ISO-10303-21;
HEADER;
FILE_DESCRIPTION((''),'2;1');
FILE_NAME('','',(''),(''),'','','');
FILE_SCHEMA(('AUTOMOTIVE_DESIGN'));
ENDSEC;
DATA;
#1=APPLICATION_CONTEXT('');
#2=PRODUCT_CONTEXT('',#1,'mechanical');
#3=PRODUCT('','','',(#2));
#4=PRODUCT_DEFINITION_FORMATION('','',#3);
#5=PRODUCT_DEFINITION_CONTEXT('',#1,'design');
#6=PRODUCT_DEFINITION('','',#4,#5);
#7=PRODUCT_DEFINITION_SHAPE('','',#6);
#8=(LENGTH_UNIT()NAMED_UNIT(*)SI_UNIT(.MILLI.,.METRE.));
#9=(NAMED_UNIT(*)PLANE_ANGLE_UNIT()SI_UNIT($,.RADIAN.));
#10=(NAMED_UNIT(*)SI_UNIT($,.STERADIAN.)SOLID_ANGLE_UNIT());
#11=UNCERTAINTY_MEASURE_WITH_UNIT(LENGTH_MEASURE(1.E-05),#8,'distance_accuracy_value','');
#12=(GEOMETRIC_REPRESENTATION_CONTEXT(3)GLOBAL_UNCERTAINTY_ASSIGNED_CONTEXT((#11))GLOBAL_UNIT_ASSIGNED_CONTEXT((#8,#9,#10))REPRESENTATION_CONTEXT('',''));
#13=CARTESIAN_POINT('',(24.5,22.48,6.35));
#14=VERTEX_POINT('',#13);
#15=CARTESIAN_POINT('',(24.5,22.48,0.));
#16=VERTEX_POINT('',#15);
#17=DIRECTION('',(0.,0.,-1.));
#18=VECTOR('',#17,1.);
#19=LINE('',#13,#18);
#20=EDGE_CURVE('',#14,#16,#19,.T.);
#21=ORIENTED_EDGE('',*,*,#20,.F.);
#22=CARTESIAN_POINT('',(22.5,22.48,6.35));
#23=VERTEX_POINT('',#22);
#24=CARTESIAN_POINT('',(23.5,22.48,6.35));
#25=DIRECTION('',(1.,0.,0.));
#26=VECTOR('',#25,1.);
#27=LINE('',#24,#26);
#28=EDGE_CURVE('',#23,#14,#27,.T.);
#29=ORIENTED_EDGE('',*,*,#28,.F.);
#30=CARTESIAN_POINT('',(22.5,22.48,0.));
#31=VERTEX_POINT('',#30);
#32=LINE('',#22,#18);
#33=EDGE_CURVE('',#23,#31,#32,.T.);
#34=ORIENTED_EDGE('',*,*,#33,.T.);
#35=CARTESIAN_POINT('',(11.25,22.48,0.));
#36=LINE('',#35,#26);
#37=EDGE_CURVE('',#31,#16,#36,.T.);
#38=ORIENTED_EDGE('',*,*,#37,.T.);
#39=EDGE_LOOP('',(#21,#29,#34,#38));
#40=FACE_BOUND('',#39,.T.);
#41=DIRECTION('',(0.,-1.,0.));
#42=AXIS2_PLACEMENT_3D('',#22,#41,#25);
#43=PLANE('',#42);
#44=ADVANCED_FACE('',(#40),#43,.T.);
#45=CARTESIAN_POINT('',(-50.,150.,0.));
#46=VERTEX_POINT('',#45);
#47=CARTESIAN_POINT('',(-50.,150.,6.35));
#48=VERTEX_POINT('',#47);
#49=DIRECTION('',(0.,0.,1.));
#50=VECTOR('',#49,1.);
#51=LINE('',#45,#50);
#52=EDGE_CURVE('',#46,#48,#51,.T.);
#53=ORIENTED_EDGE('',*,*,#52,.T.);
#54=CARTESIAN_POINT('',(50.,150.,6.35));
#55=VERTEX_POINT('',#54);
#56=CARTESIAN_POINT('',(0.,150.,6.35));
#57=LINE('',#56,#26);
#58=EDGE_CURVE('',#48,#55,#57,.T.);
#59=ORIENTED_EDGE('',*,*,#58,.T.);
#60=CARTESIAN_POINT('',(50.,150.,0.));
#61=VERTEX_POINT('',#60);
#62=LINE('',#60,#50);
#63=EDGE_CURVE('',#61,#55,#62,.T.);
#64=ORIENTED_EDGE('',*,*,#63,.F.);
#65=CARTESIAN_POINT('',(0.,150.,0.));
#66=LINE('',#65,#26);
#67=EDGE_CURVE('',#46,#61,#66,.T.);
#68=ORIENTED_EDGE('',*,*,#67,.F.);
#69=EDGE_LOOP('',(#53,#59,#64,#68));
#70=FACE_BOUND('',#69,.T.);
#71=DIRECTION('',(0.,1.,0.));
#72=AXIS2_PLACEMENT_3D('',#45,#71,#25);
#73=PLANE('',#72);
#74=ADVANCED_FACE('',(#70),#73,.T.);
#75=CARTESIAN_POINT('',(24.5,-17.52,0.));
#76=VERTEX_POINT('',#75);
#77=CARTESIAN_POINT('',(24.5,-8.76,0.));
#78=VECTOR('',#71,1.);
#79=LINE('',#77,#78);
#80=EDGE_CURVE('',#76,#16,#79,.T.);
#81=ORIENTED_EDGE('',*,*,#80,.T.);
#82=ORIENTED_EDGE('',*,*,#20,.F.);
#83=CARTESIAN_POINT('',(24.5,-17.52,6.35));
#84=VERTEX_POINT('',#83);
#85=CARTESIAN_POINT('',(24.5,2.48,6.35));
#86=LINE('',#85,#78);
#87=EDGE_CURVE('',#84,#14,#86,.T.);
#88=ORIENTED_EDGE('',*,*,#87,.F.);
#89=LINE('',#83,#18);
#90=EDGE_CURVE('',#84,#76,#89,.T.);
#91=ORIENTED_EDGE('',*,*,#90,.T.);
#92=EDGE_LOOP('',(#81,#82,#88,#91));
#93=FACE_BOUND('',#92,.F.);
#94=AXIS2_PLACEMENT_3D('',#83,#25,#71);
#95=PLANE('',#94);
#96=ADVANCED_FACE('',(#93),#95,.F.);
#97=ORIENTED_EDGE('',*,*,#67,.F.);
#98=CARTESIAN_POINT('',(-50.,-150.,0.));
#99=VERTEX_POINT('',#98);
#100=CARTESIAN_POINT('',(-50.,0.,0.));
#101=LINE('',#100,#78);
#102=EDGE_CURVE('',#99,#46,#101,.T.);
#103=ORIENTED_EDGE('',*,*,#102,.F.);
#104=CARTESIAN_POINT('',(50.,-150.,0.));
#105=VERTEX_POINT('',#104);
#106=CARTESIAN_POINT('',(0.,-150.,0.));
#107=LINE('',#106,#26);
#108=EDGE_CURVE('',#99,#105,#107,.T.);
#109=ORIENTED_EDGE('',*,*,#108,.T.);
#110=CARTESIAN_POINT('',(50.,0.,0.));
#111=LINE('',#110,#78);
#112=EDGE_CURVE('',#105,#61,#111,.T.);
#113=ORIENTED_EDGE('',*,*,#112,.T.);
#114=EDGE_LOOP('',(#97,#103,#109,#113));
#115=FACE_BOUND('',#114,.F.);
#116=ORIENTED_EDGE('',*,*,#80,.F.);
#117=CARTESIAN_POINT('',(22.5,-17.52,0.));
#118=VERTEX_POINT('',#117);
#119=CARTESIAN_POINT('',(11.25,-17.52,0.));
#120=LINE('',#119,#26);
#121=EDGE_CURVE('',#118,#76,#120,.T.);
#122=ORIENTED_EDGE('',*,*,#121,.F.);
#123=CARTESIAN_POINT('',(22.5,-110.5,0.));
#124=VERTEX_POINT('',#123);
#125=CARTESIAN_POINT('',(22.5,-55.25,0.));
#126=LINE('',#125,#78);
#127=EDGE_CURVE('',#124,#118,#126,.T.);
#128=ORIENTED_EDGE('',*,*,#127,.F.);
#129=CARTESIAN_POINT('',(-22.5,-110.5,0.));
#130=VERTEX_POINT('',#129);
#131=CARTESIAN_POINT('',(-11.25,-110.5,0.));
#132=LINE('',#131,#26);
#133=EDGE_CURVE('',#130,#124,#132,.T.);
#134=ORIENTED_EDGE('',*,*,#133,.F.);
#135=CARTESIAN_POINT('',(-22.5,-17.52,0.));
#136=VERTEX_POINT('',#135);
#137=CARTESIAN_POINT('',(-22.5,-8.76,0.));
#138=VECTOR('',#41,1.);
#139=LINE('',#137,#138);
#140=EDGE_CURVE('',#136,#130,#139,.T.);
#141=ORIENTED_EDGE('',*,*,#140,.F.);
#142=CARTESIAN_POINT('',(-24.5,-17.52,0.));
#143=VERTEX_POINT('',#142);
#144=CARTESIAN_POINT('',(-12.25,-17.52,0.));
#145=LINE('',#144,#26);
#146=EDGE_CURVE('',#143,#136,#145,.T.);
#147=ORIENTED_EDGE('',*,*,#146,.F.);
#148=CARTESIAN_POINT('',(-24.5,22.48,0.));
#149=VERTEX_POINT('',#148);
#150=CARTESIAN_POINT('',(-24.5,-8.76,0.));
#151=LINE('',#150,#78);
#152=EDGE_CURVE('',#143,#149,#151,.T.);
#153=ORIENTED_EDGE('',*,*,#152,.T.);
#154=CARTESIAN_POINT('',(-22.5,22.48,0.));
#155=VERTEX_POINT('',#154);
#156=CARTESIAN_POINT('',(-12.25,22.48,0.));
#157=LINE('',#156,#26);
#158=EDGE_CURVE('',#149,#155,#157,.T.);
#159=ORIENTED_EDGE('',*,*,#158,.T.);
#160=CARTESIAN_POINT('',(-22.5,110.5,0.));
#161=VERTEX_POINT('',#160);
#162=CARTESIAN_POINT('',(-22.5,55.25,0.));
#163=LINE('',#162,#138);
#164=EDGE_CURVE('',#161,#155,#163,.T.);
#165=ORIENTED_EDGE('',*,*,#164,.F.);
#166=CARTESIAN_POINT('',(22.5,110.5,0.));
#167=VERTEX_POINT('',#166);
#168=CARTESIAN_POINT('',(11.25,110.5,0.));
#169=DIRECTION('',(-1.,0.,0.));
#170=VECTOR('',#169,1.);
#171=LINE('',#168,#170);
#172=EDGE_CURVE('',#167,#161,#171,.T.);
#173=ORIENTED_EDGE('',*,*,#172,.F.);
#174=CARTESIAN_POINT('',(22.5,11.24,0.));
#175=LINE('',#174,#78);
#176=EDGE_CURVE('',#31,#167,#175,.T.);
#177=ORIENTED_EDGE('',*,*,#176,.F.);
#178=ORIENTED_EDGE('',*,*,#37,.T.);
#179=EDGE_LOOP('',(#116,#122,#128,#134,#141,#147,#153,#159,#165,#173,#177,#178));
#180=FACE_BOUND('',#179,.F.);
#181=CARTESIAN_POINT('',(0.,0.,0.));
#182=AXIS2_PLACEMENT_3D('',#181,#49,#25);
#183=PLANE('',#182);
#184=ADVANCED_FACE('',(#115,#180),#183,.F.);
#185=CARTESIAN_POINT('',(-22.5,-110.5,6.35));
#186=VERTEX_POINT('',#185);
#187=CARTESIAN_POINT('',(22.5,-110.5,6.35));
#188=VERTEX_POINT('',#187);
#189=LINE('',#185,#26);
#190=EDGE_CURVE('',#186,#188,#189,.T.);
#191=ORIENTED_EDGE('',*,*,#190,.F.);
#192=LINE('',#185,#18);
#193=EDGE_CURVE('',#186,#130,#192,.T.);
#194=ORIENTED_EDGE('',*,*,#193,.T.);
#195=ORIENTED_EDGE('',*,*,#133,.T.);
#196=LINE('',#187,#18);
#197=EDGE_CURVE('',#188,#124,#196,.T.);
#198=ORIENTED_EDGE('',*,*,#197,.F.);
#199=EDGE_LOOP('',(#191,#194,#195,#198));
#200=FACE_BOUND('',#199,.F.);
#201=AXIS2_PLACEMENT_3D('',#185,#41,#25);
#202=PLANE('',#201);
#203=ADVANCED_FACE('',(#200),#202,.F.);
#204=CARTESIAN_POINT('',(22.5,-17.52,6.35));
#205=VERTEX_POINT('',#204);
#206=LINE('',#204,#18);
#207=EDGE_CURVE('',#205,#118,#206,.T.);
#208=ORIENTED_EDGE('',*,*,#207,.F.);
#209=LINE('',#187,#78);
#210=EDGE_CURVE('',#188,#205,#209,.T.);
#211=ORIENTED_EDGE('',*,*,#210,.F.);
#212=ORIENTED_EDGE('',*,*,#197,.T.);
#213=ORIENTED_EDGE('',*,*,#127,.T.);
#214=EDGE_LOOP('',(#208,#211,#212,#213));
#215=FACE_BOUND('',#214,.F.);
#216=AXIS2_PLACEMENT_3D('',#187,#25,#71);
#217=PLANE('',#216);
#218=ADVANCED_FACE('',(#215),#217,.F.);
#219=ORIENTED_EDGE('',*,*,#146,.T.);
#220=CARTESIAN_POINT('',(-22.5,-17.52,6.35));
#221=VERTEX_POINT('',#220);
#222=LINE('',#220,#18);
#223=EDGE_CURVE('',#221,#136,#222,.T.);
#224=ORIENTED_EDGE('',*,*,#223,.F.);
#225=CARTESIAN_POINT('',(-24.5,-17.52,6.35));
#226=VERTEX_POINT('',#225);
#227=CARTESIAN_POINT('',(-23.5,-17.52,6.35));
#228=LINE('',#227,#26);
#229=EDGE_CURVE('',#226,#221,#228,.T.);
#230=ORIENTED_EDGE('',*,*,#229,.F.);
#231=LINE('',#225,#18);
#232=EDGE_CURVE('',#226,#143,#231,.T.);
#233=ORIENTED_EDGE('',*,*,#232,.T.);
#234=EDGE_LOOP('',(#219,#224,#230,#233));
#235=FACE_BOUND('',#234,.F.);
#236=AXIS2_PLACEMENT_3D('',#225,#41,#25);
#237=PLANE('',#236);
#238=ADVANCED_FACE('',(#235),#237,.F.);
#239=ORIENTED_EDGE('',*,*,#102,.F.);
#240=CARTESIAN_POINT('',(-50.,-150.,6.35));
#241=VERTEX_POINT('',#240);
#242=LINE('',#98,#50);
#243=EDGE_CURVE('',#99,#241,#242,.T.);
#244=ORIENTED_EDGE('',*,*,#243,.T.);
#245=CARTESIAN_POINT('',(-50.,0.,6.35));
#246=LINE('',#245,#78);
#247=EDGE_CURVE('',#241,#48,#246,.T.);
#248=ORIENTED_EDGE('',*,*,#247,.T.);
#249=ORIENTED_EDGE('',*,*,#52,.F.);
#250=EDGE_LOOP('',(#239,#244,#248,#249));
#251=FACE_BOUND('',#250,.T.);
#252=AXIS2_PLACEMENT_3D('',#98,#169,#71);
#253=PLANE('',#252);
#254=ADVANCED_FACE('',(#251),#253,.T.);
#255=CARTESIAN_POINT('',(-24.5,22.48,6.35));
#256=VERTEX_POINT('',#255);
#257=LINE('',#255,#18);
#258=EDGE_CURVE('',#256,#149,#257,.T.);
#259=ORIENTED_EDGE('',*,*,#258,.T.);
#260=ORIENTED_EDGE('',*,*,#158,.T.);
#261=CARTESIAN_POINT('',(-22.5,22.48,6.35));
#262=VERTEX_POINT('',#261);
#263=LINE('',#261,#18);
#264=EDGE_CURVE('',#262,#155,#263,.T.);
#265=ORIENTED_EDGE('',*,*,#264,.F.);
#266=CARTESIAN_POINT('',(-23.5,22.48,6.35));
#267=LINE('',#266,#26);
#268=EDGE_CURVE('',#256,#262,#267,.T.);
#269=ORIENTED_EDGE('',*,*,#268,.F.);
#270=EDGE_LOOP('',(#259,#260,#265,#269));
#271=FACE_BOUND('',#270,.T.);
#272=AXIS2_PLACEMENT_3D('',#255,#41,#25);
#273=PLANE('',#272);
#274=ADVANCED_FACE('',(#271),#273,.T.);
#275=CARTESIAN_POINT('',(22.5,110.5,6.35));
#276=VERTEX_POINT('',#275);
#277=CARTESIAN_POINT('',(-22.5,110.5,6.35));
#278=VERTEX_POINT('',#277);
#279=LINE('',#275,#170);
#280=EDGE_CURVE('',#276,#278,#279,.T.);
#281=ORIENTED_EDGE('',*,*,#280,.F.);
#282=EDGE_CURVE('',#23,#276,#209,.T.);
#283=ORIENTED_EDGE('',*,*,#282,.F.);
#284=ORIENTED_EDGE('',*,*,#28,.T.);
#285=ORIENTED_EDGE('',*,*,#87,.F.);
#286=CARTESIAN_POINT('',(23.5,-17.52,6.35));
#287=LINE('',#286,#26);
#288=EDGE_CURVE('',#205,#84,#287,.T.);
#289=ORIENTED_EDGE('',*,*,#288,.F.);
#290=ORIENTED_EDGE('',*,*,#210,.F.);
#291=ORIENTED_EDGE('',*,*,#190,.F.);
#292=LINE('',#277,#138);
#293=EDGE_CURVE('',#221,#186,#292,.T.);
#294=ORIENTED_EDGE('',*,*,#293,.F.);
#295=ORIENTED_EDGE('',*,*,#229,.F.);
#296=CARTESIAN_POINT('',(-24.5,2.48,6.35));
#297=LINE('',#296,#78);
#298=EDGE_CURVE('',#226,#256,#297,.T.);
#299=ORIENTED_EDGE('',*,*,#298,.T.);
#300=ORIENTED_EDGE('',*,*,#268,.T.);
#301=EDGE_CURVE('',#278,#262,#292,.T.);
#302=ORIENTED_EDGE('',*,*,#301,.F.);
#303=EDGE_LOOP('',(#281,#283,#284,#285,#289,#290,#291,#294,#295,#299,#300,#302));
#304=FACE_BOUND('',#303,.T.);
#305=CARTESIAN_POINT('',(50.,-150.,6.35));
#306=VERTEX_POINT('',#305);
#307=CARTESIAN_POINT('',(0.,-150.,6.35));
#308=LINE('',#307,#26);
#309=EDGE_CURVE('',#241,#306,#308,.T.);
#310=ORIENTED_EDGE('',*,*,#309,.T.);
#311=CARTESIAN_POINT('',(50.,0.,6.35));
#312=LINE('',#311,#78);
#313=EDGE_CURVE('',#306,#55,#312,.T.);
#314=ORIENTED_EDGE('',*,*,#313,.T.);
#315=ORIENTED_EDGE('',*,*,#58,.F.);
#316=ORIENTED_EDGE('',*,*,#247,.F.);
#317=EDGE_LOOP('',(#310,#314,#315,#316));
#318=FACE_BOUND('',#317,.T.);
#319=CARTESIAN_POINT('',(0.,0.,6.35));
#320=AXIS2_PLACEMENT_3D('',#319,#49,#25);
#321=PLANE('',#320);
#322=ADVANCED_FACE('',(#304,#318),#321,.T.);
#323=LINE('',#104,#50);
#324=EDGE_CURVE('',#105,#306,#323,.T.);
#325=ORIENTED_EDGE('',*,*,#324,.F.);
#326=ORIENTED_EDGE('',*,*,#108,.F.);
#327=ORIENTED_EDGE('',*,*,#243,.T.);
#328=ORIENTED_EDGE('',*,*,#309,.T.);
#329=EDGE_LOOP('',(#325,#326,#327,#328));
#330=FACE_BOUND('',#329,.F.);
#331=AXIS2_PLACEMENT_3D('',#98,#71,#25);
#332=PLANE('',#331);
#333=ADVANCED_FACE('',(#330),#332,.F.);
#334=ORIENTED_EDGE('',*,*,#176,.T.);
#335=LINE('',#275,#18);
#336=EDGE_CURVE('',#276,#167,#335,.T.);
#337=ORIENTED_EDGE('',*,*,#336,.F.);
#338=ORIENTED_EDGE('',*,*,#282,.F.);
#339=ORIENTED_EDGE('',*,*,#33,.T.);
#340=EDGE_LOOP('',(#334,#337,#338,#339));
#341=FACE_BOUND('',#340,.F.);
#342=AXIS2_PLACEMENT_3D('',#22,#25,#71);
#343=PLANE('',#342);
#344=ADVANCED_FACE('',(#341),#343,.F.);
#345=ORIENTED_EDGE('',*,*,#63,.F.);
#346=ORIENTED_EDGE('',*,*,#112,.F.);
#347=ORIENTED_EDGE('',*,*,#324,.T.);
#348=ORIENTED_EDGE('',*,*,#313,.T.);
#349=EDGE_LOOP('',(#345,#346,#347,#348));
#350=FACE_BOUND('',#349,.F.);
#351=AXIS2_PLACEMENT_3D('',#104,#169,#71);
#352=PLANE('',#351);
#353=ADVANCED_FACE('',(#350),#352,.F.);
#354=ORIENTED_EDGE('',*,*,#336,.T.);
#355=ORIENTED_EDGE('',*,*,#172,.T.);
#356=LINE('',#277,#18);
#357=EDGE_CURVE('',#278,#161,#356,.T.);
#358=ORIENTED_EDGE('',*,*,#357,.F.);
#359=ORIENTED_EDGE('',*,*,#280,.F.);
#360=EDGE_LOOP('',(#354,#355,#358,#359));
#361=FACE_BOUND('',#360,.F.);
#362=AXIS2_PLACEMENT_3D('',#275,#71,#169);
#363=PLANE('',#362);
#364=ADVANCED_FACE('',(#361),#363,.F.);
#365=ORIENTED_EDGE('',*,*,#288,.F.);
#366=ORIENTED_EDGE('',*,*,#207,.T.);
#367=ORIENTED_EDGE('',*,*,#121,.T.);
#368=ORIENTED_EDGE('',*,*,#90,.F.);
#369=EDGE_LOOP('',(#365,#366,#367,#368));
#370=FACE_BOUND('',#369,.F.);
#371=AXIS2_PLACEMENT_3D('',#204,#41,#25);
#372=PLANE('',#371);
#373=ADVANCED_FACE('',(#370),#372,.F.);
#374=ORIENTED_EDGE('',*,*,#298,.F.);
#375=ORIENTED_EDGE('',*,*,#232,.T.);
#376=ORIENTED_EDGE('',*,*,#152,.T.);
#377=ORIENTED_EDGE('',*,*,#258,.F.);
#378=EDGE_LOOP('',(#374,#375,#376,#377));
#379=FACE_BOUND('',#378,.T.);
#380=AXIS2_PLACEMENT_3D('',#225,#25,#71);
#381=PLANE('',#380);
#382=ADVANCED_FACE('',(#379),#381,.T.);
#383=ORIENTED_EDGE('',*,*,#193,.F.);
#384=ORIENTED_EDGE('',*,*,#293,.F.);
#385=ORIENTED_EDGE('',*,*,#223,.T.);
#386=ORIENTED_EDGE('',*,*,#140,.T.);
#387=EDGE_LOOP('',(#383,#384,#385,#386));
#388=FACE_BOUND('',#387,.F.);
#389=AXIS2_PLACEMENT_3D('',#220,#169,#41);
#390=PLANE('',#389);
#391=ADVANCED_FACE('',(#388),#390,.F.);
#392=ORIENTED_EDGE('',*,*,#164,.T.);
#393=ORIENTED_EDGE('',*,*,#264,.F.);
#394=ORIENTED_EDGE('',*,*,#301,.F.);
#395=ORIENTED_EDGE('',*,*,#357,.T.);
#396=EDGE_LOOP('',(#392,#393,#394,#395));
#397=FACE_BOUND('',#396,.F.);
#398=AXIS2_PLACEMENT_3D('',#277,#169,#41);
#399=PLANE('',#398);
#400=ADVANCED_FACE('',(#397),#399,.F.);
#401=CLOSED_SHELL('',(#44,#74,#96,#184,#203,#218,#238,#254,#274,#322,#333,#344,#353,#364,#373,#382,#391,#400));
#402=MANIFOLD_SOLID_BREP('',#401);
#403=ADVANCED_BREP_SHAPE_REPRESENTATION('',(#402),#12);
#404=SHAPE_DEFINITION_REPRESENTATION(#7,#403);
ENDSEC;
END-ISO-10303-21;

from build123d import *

# Parameters (mm, degrees)
F0_W     = 100
F0_H     = 300
F1_DEPTH = 6.35
F2_W     = 2
F2_H     = 40
F3_DEPTH = 25.4


# Not quite as in the source:
# - a length typed as a fraction of an inch, garbled in the dataset ("3 / 203.2 mm" for 3/8 in), is restored


with BuildPart() as f1:
    # F0 (on Top) → F1 (new body)
    with BuildSketch(Plane.XY):
        Rectangle(F0_W, F0_H)
    extrude(amount=F1_DEPTH)

    # F2 (on face) → F3 (cut)
    with BuildSketch(Plane.XY.offset(6.35)):
        Polygon((22.5, 22.48), (22.5, 110.5), (-22.5, 110.5), (-22.5, 22.48), (-22.5, -17.52), (-22.5, -110.5), (22.5, -110.5), (22.5, -17.52), align=None)
        with Locations((23.5, 2.48)):
            Rectangle(F2_W, F2_H)
        with Locations((-23.5, 2.48)):
            Rectangle(F2_W, F2_H)
    extrude(amount=-F3_DEPTH, mode=Mode.SUBTRACT)


solid = f1.part
